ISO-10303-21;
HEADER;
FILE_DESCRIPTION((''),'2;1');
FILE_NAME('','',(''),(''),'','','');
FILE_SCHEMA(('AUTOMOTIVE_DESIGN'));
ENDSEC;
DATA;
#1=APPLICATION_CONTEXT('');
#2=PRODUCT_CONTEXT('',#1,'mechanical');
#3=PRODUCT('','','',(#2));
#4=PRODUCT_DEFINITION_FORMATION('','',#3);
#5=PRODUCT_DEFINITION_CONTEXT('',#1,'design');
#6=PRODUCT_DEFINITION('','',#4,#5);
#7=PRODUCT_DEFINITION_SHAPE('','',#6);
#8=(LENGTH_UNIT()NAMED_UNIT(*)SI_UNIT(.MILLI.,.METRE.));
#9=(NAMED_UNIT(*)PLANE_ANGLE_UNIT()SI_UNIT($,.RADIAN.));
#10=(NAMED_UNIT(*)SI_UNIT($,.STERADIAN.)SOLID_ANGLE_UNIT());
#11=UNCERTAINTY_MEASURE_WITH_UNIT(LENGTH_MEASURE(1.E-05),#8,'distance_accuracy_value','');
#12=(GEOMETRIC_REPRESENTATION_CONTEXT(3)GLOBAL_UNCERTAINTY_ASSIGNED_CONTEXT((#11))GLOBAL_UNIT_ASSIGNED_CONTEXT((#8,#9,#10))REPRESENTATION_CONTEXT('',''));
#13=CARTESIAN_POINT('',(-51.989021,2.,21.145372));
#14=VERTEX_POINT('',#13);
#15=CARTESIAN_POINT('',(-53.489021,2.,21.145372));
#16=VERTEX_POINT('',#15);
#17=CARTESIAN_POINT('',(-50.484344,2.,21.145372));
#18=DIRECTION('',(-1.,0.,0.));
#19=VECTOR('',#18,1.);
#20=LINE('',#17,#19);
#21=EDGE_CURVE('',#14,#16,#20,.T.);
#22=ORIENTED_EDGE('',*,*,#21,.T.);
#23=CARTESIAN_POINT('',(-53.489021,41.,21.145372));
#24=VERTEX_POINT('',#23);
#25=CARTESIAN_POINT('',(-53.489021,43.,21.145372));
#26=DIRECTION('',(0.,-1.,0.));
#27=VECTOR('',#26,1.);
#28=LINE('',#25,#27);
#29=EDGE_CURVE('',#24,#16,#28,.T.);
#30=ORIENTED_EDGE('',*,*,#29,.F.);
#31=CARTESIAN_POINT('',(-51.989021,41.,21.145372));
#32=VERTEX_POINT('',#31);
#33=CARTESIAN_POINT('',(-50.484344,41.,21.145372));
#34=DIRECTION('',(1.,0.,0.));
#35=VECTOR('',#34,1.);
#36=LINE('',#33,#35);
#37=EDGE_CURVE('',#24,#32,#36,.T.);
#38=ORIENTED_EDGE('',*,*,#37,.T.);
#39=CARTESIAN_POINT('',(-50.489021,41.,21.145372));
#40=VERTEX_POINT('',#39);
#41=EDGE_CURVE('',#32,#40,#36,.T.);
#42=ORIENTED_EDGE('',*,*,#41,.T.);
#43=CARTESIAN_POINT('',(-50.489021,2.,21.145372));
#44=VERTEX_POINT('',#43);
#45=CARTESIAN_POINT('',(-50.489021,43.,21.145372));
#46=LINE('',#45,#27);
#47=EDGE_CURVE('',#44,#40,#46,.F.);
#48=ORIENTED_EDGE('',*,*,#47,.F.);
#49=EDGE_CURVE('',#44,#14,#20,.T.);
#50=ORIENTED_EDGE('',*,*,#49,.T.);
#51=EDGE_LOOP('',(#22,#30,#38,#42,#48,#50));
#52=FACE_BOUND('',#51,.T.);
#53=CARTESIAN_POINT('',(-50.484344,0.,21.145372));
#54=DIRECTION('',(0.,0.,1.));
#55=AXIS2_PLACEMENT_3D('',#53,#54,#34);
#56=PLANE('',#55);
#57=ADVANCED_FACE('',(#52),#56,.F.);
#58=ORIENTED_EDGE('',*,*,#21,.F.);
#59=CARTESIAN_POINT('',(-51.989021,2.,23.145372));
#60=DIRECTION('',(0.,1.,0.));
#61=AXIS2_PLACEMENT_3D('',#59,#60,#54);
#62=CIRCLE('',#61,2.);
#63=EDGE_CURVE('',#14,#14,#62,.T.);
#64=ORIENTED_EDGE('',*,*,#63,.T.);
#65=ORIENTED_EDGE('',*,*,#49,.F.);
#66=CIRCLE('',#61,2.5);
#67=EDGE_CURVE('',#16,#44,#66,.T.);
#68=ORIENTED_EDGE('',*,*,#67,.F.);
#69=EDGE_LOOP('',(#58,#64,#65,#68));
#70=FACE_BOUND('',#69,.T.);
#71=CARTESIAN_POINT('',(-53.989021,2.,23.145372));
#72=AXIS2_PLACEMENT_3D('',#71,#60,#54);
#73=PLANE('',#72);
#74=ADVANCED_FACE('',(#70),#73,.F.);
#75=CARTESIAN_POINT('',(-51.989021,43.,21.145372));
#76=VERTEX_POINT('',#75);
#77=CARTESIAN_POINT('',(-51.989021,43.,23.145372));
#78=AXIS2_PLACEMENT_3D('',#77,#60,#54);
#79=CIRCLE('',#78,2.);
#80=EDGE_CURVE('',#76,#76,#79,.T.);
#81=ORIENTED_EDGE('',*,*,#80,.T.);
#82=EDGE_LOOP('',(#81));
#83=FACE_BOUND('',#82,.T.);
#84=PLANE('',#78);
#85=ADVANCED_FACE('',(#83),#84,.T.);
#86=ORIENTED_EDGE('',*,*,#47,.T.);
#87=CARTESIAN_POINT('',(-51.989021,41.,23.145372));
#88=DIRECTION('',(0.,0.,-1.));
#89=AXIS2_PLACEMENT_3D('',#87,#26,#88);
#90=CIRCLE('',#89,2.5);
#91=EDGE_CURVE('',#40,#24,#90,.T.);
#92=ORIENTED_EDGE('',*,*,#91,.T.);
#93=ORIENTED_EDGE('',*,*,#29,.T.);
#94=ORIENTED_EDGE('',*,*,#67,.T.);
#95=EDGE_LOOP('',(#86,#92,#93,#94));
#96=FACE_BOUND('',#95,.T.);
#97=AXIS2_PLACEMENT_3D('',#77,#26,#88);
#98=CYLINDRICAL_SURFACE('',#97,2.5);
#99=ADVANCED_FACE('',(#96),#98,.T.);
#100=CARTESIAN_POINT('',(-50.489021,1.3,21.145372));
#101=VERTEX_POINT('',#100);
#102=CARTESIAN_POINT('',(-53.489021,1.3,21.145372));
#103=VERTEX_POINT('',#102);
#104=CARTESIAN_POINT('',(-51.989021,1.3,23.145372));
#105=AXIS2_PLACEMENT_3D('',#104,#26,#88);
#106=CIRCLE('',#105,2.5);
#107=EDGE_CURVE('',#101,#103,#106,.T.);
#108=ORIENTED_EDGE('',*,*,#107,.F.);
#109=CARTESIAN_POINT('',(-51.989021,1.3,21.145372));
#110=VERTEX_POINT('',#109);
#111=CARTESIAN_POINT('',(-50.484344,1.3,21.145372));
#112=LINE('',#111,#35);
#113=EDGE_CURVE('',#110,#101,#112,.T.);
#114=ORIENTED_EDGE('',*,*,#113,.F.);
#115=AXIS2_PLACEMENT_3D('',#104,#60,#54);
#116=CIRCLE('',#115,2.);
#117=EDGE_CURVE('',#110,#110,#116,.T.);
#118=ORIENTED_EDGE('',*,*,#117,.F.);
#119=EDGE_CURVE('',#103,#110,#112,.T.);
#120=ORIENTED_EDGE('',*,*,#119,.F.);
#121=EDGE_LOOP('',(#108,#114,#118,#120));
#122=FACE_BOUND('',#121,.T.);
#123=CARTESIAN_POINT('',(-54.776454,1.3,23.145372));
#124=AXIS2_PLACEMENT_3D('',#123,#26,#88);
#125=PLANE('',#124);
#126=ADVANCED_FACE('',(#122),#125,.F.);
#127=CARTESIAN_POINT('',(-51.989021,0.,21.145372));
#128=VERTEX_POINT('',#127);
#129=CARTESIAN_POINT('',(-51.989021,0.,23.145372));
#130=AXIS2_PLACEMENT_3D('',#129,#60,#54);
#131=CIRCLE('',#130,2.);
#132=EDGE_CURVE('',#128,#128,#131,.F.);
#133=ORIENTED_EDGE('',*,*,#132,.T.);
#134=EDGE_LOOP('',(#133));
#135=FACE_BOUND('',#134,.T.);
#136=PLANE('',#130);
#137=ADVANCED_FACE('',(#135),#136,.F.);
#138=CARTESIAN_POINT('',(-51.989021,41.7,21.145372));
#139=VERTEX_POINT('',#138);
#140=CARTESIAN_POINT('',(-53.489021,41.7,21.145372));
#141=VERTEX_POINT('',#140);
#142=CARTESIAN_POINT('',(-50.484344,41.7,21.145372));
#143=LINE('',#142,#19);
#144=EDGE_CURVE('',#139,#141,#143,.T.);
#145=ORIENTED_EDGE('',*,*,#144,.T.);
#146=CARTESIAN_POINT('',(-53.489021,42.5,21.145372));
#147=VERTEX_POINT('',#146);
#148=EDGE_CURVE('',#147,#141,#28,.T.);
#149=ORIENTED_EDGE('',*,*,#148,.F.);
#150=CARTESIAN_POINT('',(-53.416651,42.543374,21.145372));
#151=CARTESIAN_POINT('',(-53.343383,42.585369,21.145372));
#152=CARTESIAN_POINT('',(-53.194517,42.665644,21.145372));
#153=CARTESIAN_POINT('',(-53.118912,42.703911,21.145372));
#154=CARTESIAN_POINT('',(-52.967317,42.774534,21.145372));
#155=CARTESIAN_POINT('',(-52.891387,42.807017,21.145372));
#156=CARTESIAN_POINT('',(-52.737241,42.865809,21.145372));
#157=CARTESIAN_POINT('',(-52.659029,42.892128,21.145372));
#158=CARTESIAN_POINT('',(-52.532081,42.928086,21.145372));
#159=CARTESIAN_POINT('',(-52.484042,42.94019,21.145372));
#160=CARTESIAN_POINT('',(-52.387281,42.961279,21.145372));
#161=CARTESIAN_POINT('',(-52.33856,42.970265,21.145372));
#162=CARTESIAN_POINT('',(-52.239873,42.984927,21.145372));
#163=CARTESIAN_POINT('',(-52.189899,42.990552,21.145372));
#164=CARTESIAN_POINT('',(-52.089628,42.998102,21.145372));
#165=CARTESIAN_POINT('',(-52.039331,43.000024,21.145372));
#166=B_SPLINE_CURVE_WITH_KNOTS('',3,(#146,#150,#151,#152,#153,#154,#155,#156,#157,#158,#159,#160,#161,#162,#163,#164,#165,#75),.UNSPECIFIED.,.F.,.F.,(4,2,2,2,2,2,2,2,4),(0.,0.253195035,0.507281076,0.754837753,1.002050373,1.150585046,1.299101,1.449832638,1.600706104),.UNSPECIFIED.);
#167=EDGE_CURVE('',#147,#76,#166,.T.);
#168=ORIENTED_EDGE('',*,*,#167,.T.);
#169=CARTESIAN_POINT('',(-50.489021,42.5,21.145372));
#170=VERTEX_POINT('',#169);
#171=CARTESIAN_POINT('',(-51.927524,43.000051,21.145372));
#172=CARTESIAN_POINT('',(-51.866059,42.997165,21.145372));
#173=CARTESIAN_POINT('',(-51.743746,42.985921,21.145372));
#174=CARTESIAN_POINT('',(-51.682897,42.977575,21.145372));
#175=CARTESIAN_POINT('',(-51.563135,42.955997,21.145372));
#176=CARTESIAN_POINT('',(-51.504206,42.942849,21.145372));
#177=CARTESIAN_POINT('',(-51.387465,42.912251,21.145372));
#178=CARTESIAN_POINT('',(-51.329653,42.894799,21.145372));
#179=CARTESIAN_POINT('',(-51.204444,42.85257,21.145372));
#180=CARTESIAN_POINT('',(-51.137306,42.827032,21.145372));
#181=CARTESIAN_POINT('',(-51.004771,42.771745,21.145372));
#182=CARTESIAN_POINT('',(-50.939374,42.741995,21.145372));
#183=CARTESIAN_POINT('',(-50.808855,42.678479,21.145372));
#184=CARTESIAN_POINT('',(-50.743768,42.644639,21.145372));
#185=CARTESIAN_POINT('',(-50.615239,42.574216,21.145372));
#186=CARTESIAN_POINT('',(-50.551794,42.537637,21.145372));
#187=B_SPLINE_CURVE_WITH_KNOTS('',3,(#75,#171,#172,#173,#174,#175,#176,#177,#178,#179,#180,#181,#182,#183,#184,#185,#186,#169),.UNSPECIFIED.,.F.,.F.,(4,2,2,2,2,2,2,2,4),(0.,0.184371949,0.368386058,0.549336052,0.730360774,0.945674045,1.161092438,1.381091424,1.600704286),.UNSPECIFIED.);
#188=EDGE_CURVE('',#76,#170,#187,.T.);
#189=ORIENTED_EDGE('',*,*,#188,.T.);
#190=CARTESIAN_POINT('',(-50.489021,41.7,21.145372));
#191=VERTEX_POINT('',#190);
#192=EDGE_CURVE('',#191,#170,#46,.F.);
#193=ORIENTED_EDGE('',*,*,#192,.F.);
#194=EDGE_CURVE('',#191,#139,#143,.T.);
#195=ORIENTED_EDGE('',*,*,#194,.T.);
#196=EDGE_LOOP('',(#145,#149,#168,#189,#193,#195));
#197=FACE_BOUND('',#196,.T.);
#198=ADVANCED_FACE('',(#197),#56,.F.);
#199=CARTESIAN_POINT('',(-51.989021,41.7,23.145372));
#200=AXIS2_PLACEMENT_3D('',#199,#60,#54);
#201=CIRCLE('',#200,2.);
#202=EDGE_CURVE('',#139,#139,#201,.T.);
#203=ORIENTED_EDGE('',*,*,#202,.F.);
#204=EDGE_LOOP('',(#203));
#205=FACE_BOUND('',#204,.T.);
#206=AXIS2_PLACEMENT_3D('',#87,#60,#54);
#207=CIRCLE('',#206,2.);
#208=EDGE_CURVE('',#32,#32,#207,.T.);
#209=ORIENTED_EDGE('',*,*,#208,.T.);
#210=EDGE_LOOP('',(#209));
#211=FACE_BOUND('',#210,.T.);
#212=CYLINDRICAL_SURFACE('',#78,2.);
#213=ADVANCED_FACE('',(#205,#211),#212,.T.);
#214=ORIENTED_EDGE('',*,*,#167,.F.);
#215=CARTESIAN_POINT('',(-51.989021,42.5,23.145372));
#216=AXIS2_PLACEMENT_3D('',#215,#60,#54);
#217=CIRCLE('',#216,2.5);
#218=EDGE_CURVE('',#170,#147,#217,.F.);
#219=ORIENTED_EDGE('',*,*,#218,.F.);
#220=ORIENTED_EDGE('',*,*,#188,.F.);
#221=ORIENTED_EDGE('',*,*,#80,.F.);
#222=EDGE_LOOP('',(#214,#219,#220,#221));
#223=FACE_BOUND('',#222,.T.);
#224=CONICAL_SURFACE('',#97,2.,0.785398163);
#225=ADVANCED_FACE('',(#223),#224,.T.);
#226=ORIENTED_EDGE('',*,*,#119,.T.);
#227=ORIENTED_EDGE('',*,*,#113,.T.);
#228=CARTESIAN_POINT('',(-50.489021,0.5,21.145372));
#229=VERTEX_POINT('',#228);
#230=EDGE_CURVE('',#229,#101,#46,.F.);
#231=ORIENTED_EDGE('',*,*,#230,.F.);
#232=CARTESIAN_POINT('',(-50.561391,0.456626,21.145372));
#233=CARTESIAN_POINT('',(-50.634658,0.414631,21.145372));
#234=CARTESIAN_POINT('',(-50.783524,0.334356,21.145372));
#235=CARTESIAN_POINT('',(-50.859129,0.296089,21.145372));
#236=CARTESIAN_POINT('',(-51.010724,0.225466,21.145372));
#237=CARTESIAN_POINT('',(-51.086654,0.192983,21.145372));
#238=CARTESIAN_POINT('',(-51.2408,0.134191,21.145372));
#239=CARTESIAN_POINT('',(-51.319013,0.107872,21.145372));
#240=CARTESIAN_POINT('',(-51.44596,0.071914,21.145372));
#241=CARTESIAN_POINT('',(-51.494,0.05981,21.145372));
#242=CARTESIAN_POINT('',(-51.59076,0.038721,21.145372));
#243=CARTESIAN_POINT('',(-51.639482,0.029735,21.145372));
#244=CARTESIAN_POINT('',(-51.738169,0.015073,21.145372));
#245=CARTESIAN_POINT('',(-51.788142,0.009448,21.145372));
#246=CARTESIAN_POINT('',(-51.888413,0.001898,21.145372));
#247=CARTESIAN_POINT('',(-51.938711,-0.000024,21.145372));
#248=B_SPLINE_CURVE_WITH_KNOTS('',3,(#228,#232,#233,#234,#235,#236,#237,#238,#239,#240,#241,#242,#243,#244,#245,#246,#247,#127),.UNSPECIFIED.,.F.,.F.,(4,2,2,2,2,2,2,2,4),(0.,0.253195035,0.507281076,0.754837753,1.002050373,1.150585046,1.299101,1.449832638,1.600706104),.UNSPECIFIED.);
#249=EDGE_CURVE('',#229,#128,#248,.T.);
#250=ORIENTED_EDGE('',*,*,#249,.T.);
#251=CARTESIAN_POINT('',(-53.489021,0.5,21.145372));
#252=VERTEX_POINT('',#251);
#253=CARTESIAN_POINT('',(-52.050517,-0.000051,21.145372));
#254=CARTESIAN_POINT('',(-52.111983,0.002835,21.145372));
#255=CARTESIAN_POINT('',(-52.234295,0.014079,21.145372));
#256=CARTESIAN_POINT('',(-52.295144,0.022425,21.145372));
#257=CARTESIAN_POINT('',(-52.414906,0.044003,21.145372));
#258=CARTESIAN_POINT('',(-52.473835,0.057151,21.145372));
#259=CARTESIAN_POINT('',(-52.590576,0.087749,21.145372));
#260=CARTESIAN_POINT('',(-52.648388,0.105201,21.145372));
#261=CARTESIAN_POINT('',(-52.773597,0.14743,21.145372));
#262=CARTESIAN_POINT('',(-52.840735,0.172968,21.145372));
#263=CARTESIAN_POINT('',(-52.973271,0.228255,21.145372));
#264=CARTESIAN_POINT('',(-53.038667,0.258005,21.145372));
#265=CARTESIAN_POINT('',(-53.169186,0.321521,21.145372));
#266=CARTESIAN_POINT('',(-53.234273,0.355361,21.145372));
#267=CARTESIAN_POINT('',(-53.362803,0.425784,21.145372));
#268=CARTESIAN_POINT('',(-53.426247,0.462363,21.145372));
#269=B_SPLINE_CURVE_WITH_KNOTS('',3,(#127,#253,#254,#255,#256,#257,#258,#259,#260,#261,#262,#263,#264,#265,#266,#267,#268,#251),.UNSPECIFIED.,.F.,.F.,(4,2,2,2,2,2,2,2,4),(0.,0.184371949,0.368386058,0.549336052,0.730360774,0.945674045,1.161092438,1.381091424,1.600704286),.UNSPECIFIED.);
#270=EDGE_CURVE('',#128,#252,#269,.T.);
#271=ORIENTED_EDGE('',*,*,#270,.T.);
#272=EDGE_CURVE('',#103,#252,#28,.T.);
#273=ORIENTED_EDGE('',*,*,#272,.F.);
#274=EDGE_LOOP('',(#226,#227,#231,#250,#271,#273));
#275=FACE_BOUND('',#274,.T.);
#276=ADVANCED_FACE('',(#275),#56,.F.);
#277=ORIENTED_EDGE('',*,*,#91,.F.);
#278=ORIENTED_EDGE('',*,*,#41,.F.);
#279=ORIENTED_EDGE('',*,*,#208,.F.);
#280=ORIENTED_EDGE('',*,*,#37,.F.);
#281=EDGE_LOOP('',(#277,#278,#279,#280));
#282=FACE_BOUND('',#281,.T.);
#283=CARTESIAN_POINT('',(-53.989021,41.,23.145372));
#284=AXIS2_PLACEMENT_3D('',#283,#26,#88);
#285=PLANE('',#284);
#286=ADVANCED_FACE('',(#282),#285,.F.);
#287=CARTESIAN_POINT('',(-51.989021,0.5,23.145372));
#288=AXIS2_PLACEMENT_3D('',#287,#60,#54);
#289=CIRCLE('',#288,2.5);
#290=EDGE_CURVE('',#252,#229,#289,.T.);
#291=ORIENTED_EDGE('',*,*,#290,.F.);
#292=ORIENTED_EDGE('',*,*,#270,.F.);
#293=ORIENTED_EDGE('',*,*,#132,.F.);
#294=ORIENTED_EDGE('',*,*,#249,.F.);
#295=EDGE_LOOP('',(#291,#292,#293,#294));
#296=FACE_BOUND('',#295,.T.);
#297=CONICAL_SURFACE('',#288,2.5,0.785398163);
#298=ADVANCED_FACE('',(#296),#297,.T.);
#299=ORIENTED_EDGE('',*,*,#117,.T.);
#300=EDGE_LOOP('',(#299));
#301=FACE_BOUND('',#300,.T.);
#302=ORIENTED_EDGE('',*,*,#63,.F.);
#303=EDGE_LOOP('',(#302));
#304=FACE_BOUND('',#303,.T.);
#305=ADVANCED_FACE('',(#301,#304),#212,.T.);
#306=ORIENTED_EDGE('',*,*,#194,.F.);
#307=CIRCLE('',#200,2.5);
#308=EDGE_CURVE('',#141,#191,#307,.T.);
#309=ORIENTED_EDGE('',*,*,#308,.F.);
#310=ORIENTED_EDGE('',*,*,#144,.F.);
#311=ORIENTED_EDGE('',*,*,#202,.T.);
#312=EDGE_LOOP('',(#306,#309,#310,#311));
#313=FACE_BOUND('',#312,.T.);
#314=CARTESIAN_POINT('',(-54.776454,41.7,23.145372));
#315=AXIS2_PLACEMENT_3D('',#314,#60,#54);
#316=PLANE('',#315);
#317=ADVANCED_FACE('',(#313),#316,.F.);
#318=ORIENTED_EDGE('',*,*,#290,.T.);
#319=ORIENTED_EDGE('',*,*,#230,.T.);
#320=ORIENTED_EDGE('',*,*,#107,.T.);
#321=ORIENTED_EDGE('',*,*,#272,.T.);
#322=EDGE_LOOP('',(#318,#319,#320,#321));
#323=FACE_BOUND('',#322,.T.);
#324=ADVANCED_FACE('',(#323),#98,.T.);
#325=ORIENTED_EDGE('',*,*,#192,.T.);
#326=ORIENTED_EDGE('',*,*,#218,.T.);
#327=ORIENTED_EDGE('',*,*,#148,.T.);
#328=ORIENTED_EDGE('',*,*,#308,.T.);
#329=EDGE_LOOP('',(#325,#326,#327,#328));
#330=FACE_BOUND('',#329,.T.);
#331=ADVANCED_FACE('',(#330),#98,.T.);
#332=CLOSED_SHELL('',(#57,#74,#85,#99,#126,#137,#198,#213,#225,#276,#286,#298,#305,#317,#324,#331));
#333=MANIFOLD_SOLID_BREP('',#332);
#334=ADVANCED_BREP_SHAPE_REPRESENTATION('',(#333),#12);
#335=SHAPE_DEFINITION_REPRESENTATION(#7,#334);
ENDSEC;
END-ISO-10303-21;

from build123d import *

# Parameters (mm, degrees)
SKETCH1_R           = 2.5
BOSS_EXTRUDE1_DEPTH = 43
CUT_EXTRUDE1_DEPTH  = 74.998233143
CHAMFER1_SIZE       = 0.5
SKETCH4_W           = 0.787433245
SKETCH4_H           = 0.7


with BuildPart() as part:
    # Sketch1 → Boss-Extrude1 (new body)
    with BuildSketch(Plane(origin=(0, 0, 0), x_dir=(1, 0, 0), z_dir=(0, 1, 0))):
        with Locations(Location((-51.989020711, -23.145372492, 0), (0, 0, 270))):
            Circle(SKETCH1_R)
    extrude(amount=BOSS_EXTRUDE1_DEPTH)

    # Sketch2 → Cut-Extrude1 (cut, through all)
    with BuildSketch(Plane(origin=(0, 43, 0), x_dir=(1, 0, 0), z_dir=(0, 1, 0))):
        with BuildLine():
            Line((-50.48434428, -21.145372492), (-53.493697142, -21.145372492))
            ThreePointArc((-53.493697142, -21.145372492), (-51.989020711, -20.642563837), (-50.48434428, -21.145372492))
        make_face()
    extrude(amount=-CUT_EXTRUDE1_DEPTH, mode=Mode.SUBTRACT)

    # Chamfer1
    chamfer1_edges = [part.edges().sort_by_distance(p)[0] for p in [
        (-51.989020711, 43, 25.645372492),
        (-51.989020711, 0, 25.645372492),
    ]]
    chamfer(chamfer1_edges, length=CHAMFER1_SIZE - 0.0001)  # a hair under: the kernel refuses the full size

    # Sketch4 → Cut-Revolve6 (revolve, cut)
    with BuildSketch(Plane.XY.offset(23.145372492), mode=Mode.PRIVATE) as cut_revolve6_sk:
        with Locations((-54.382737334, 41.35)):
            Rectangle(SKETCH4_W, SKETCH4_H)
        with Locations((-54.382737334, 1.65)):
            Rectangle(SKETCH4_W, SKETCH4_H)
    revolve(cut_revolve6_sk.sketch.rotate(Axis((-51.989020711, 43, 23.145372492), (0, -1, 0)), 90), axis=Axis((-51.989020711, 43, 23.145372492), (0, -1, 0)), mode=Mode.SUBTRACT)


solid = part.part
